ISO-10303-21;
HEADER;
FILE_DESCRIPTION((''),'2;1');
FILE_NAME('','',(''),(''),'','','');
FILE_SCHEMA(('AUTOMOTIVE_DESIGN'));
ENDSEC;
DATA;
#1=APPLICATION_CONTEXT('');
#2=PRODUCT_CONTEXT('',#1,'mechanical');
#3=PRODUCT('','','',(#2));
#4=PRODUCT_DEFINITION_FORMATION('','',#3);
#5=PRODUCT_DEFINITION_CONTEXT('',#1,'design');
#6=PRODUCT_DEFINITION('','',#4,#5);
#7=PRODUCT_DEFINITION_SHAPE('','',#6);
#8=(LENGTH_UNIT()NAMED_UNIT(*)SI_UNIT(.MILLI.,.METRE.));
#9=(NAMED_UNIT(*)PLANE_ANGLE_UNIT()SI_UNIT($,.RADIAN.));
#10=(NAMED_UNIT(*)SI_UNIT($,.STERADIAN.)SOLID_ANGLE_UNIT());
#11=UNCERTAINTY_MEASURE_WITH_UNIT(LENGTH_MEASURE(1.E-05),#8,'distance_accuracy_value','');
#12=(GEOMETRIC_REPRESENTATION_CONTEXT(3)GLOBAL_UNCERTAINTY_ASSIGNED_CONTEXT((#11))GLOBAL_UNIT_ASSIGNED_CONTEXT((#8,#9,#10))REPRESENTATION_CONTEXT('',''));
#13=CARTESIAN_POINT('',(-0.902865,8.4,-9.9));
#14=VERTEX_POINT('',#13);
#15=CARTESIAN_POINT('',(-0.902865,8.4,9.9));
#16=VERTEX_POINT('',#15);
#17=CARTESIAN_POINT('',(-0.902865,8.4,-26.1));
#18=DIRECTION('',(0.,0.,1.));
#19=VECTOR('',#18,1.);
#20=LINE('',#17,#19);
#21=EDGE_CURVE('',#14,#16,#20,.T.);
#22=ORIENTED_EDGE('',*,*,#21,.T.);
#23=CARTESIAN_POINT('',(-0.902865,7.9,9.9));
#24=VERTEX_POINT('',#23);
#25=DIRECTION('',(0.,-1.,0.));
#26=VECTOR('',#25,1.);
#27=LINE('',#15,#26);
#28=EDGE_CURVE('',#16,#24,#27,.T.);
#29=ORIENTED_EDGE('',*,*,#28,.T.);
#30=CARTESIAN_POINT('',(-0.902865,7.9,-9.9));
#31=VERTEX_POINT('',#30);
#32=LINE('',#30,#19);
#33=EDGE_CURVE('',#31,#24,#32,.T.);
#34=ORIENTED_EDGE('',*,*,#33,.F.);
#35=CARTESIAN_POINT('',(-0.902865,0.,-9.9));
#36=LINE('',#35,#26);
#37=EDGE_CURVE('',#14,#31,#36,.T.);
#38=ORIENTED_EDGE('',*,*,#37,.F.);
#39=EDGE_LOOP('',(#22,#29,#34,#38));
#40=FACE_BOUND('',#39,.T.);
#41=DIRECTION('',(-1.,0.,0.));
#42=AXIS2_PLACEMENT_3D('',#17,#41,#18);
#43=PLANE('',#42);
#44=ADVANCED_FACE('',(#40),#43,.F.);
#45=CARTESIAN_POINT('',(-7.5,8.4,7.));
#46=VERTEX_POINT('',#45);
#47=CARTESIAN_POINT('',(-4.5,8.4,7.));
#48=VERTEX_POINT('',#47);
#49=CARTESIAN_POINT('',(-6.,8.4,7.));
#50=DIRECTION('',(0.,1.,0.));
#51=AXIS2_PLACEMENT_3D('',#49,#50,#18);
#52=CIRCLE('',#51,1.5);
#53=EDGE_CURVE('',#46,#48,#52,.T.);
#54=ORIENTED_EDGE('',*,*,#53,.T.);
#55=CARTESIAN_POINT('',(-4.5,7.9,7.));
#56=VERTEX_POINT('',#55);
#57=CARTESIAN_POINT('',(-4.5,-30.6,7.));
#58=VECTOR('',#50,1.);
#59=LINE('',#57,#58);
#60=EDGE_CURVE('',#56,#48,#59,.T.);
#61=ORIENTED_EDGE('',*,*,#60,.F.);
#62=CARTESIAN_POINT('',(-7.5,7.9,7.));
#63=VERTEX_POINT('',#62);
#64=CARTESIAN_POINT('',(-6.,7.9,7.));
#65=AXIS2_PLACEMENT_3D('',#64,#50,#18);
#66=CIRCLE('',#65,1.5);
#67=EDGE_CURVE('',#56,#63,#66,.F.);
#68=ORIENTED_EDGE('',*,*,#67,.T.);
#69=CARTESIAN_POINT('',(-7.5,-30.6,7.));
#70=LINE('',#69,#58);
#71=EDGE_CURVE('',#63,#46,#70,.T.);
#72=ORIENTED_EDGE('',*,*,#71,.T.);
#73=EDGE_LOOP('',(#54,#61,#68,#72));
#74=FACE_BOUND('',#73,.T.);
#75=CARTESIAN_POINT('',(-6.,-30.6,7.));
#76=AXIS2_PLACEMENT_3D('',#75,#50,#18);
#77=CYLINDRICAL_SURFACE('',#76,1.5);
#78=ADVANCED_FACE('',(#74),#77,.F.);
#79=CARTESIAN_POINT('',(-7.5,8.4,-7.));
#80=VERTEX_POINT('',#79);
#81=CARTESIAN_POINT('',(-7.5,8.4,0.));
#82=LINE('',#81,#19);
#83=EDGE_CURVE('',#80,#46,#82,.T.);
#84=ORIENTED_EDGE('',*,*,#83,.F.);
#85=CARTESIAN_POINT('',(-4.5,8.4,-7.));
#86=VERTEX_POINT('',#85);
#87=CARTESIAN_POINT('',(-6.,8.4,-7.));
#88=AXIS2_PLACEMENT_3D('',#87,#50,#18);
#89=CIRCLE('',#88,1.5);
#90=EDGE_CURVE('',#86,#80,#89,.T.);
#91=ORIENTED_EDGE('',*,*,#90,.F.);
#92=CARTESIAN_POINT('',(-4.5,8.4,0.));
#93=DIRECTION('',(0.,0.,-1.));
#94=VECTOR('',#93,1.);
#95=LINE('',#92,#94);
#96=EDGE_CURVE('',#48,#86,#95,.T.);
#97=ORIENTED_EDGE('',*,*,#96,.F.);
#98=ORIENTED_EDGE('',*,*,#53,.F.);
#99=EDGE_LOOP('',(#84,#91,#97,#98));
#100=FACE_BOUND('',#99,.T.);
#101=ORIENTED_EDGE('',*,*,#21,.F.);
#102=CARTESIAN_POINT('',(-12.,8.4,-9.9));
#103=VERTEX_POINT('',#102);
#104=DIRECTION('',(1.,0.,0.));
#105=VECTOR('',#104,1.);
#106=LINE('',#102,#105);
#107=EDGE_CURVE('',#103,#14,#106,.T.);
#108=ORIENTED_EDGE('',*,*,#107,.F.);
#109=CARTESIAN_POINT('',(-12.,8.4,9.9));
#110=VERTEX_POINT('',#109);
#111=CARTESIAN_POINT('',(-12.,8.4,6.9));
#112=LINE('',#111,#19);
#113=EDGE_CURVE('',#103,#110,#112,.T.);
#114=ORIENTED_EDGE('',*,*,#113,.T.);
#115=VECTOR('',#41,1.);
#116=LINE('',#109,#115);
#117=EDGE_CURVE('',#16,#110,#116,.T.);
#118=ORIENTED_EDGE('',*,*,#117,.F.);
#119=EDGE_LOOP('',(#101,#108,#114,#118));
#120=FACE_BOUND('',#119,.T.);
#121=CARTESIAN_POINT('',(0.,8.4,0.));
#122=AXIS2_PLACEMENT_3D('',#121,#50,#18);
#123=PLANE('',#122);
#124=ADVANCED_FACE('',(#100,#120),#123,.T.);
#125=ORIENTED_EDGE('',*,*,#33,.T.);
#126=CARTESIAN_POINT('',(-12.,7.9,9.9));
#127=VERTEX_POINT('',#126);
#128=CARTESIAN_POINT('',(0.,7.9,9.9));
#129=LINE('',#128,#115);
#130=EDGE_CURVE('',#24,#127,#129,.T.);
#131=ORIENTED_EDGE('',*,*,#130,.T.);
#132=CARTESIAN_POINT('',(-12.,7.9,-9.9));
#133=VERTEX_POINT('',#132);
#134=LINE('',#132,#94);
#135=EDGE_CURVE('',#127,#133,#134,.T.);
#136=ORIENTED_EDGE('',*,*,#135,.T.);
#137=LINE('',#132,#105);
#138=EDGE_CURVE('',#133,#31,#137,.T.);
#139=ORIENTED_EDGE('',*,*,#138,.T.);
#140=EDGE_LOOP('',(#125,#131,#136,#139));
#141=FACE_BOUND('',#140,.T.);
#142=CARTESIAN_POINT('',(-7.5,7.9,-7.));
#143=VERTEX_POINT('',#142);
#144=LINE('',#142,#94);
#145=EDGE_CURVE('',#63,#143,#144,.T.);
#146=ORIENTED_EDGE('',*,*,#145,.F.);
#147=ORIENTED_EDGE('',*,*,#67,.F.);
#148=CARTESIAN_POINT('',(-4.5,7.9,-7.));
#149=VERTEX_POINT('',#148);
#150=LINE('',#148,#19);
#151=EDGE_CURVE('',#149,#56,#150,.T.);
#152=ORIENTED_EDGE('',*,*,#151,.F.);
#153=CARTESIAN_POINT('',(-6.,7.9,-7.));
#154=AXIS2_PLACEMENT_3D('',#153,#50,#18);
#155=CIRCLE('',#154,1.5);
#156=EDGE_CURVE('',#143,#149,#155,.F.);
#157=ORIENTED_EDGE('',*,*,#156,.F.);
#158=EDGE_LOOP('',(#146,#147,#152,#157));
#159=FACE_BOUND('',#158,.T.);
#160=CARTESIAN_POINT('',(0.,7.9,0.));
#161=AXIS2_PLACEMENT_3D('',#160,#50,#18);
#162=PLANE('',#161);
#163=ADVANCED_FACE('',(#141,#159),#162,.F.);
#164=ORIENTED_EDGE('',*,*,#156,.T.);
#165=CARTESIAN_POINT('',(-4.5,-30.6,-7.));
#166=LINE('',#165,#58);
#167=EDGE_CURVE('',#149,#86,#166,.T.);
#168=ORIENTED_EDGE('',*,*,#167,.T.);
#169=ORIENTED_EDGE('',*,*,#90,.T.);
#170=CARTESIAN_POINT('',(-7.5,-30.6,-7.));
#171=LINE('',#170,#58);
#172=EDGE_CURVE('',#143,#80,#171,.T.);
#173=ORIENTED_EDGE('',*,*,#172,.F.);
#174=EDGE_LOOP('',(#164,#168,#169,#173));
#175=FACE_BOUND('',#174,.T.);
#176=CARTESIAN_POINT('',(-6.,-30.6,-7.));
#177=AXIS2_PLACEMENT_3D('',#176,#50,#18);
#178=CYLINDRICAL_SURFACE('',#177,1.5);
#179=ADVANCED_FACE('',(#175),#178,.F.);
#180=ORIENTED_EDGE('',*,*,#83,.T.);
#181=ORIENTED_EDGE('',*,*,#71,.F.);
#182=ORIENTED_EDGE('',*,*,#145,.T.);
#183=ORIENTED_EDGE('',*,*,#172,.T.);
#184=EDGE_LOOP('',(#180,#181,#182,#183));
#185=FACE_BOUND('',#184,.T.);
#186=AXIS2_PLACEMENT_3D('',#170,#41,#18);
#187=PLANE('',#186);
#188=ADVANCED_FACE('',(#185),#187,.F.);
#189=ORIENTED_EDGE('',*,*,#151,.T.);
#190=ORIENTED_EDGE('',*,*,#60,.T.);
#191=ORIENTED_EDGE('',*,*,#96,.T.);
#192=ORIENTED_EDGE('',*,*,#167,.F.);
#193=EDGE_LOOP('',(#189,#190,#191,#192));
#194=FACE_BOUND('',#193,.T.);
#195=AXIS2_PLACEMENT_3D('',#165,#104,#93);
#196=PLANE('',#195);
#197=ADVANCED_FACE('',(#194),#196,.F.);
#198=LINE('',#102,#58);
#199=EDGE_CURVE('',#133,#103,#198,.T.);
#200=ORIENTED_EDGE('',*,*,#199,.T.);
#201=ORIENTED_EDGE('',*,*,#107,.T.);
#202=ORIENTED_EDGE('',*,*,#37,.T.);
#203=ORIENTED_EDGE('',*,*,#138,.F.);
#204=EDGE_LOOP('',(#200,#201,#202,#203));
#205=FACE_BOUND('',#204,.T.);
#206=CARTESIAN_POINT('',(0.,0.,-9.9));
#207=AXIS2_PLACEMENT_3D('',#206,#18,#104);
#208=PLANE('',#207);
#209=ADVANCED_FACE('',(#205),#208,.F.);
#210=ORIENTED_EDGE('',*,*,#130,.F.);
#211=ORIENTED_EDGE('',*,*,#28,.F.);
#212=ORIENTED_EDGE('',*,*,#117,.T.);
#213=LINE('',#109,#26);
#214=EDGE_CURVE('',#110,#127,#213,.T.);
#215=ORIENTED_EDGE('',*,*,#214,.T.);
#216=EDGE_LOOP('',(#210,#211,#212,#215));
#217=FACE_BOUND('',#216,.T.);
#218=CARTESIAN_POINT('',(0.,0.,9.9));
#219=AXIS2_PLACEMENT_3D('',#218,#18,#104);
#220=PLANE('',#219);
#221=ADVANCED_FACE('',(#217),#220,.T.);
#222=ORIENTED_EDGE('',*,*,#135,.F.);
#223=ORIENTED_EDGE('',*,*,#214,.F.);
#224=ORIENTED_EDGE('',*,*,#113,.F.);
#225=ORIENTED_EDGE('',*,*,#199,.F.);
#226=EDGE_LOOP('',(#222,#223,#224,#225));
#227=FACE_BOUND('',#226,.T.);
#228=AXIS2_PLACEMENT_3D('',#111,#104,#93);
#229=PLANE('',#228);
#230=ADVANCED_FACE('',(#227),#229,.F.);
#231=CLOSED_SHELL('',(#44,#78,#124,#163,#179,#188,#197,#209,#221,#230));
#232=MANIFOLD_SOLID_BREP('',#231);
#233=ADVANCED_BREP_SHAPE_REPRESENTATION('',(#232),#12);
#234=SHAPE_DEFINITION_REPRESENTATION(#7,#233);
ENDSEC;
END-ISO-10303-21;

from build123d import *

# Parameters (mm, degrees)
SKETCH1_W               = 13.8
SKETCH1_H               = 8.8
BOSS_EXTRUDE1_DEPTH     = 3
SKETCH2_W               = 2
SKETCH2_H               = 35
BOSS_EXTRUDE2_DEPTH     = 3
SKETCH3_W               = 1.2
SKETCH3_H               = 6
BOSS_EXTRUDE3_DEPTH     = 7
FILLET3_R               = 10
SKETCH5_W               = 15
SKETCH5_H               = 13.8
BOSS_EXTRUDE4_DEPTH     = 4
SKETCH6_R               = 1.5
CUT_EXTRUDE4_DEPTH      = 38.968539608
BOSS_EXTRUDE5_DEPTH     = 2
CHAMFER2_SIZE           = 3
BOSS_EXTRUDE7_DEPTH     = 1.2
SKETCH12_W              = 15
SKETCH12_H              = 4
BOSS_EXTRUDE8_DEPTH     = 3
SKETCH13_W              = 15
SKETCH13_H              = 4
BOSS_EXTRUDE9_DEPTH     = 3
CUT_EXTRUDE7_DEPTH      = 43.28486727
CUT_EXTRUDE7_DEPTH_BACK = 43.28486727
CUT_EXTRUDE8_DEPTH      = 43.28486727
CUT_EXTRUDE8_DEPTH_BACK = 43.28486727
SKETCH15_W              = 0.807911756
SKETCH15_H              = 0.64
CUT_EXTRUDE9_DEPTH      = 41.244591358
CUT_EXTRUDE9_DEPTH_BACK = 41.244591358
SKETCH16_W              = 0.64
SKETCH16_H              = 0.6
CHAMFER3_SIZE           = 1
SKETCH18_W              = 20.701942652
SKETCH18_H              = 41.728044518
CUT_EXTRUDE10_DEPTH     = 36
SKETCH19_W              = 11.097134513
SKETCH19_H              = 20.928514419
CUT_EXTRUDE11_DEPTH     = 3.5


# Some blends are built 0.0001 mm under size
with BuildPart() as part:
    # Sketch1 → Boss-Extrude1 (new body)
    with BuildSketch(Plane(origin=(0, 0, 0), x_dir=(0, 0, -1), z_dir=(1, 0, 0))):
        Rectangle(SKETCH1_W, SKETCH1_H)
    extrude(amount=BOSS_EXTRUDE1_DEPTH)

    # Sketch2 → Boss-Extrude2 (add)
    with BuildSketch(Plane(origin=(3, 0, 0), x_dir=(0, 0, -1), z_dir=(1, 0, 0))):
        with Locations((0, -13.1)):
            Rectangle(SKETCH2_W, SKETCH2_H)
    extrude(amount=BOSS_EXTRUDE2_DEPTH)

    # Sketch3 → Boss-Extrude3 (add)
    with BuildSketch(Plane(origin=(6, 0, 0), x_dir=(0, 0, -1), z_dir=(1, 0, 0))):
        with Locations((0, -27.6)):
            Rectangle(SKETCH3_W, SKETCH3_H)
    extrude(amount=BOSS_EXTRUDE3_DEPTH)

    # Fillet3
    # the kernel refuses this fillet: 10 mm, written as the material it adds along each edge
    with BuildSketch(Plane(origin=(3, -4.4, 1), x_dir=(-1, 0, 0), z_dir=(0, 0, -1))) as fillet3_piece_1:
        with BuildLine():
            CenterArc((10, -7.141428429), FILLET3_R, 134.427004001, 45.572995999)
            Line((0, -7.141428429), (0, 0))
            Line((0, 0), (3, 0))
        make_face()
    extrude(amount=2)

    # Sketch5 → Boss-Extrude4 (add)
    with BuildSketch(Plane(origin=(0, 4.4, 0), x_dir=(1, 0, 0), z_dir=(0, 1, 0))):
        with Locations((-4.5, 0)):
            Rectangle(SKETCH5_W, SKETCH5_H)
    extrude(amount=BOSS_EXTRUDE4_DEPTH)

    # Sketch6 → Cut-Extrude4 (cut, through all)
    with BuildSketch(Plane.XZ.offset(-4.4)):
        with Locations(Location((-6, 3, 0), (0, 0, 270))):
            Circle(SKETCH6_R)
        with Locations(Location((-6, -3, 0), (0, 0, 270))):
            Circle(SKETCH6_R)
    extrude(amount=-CUT_EXTRUDE4_DEPTH, mode=Mode.SUBTRACT)

    # Sketch8 → Boss-Extrude5 (add)
    with BuildSketch(Plane(origin=(0, 0, -1), x_dir=(-1, 0, 0), z_dir=(0, 0, -1))):
        Polygon((-3, -18.758153574), (0, -4.4), (-3, -4.4), align=None)
    extrude(amount=-BOSS_EXTRUDE5_DEPTH)

    # Chamfer2
    chamfer2_edges = [part.edges().sort_by_distance(p)[0] for p in [
        (3, 4.4, 0),
    ]]
    chamfer(chamfer2_edges, length=CHAMFER2_SIZE - 0.0001)  # a hair under: the kernel refuses the full size

    # Sketch11 → Boss-Extrude7 (add)
    with BuildSketch(Plane(origin=(0, 0, -0.6), x_dir=(-1, 0, 0), z_dir=(0, 0, -1))):
        Polygon((-6, -24.6), (-13, -24.6), (-6, 1.742521041), align=None)
    extrude(amount=-BOSS_EXTRUDE7_DEPTH)

    # Sketch12 → Boss-Extrude8 (add)
    with BuildSketch(Plane(origin=(0, 0, -6.9), x_dir=(-1, 0, 0), z_dir=(0, 0, -1))):
        with Locations((4.5, 6.4)):
            Rectangle(SKETCH12_W, SKETCH12_H)
    extrude(amount=BOSS_EXTRUDE8_DEPTH)

    # Sketch13 → Boss-Extrude9 (add)
    with BuildSketch(Plane.XY.offset(6.9)):
        with Locations((-4.5, 6.4)):
            Rectangle(SKETCH13_W, SKETCH13_H)
    extrude(amount=BOSS_EXTRUDE9_DEPTH)

    # Sketch14 → Cut-Extrude7 (cut, two sides: drawn at the far end of the back side and taken through both)
    with BuildSketch(Plane(origin=(0, 8.4, 0), x_dir=(1, 0, 0), z_dir=(0, 1, 0)).offset(-CUT_EXTRUDE7_DEPTH_BACK)):
        with BuildLine():
            Line((-7.5, 7), (-7.5, -7))
            ThreePointArc((-7.5, -7), (-6, -8.5), (-4.5, -7))
            Line((-4.5, -7), (-4.5, 7))
            ThreePointArc((-4.5, 7), (-6, 8.5), (-7.5, 7))
        make_face()
    extrude(amount=CUT_EXTRUDE7_DEPTH + CUT_EXTRUDE7_DEPTH_BACK, mode=Mode.SUBTRACT)

    # Sketch15 → Cut-Extrude8 (cut, two sides: drawn at the far end of the back side and taken through both)
    with BuildSketch(Plane.XZ.offset(30.6).offset(-CUT_EXTRUDE8_DEPTH_BACK)):
        with Locations((12.596044122, 0)):
            Rectangle(SKETCH15_W, SKETCH15_H)
    extrude(amount=CUT_EXTRUDE8_DEPTH + CUT_EXTRUDE8_DEPTH_BACK, mode=Mode.SUBTRACT)

    # Sketch16 → Cut-Extrude9 (cut, two sides: drawn at the far end of the back side and taken through both)
    with BuildSketch(Plane(origin=(12.192088244, 0, 0), x_dir=(0, 0, -1), z_dir=(1, 0, 0)).offset(-CUT_EXTRUDE9_DEPTH_BACK)):
        with Locations((0, -30.3)):
            Rectangle(SKETCH16_W, SKETCH16_H)
    extrude(amount=CUT_EXTRUDE9_DEPTH + CUT_EXTRUDE9_DEPTH_BACK, mode=Mode.SUBTRACT)

    # Chamfer3
    chamfer3_edges = [part.edges().sort_by_distance(p)[0] for p in [
        (12.192088244, -30, 0),
    ]]
    chamfer(chamfer3_edges, length=CHAMFER3_SIZE)

    # Sketch18 → Cut-Extrude10 (cut)
    with BuildSketch(Plane.XY.offset(9.9)):
        with Locations((9.448105839, -12.464022259)):
            Rectangle(SKETCH18_W, SKETCH18_H)
    extrude(amount=-CUT_EXTRUDE10_DEPTH, mode=Mode.SUBTRACT)

    # Sketch19 → Cut-Extrude11 (cut)
    with BuildSketch(Plane.XZ.offset(-4.4)):
        with Locations((-6.451432743, 0.56425721)):
            Rectangle(SKETCH19_W, SKETCH19_H)
    extrude(amount=-CUT_EXTRUDE11_DEPTH, mode=Mode.SUBTRACT)


solid = part.part
